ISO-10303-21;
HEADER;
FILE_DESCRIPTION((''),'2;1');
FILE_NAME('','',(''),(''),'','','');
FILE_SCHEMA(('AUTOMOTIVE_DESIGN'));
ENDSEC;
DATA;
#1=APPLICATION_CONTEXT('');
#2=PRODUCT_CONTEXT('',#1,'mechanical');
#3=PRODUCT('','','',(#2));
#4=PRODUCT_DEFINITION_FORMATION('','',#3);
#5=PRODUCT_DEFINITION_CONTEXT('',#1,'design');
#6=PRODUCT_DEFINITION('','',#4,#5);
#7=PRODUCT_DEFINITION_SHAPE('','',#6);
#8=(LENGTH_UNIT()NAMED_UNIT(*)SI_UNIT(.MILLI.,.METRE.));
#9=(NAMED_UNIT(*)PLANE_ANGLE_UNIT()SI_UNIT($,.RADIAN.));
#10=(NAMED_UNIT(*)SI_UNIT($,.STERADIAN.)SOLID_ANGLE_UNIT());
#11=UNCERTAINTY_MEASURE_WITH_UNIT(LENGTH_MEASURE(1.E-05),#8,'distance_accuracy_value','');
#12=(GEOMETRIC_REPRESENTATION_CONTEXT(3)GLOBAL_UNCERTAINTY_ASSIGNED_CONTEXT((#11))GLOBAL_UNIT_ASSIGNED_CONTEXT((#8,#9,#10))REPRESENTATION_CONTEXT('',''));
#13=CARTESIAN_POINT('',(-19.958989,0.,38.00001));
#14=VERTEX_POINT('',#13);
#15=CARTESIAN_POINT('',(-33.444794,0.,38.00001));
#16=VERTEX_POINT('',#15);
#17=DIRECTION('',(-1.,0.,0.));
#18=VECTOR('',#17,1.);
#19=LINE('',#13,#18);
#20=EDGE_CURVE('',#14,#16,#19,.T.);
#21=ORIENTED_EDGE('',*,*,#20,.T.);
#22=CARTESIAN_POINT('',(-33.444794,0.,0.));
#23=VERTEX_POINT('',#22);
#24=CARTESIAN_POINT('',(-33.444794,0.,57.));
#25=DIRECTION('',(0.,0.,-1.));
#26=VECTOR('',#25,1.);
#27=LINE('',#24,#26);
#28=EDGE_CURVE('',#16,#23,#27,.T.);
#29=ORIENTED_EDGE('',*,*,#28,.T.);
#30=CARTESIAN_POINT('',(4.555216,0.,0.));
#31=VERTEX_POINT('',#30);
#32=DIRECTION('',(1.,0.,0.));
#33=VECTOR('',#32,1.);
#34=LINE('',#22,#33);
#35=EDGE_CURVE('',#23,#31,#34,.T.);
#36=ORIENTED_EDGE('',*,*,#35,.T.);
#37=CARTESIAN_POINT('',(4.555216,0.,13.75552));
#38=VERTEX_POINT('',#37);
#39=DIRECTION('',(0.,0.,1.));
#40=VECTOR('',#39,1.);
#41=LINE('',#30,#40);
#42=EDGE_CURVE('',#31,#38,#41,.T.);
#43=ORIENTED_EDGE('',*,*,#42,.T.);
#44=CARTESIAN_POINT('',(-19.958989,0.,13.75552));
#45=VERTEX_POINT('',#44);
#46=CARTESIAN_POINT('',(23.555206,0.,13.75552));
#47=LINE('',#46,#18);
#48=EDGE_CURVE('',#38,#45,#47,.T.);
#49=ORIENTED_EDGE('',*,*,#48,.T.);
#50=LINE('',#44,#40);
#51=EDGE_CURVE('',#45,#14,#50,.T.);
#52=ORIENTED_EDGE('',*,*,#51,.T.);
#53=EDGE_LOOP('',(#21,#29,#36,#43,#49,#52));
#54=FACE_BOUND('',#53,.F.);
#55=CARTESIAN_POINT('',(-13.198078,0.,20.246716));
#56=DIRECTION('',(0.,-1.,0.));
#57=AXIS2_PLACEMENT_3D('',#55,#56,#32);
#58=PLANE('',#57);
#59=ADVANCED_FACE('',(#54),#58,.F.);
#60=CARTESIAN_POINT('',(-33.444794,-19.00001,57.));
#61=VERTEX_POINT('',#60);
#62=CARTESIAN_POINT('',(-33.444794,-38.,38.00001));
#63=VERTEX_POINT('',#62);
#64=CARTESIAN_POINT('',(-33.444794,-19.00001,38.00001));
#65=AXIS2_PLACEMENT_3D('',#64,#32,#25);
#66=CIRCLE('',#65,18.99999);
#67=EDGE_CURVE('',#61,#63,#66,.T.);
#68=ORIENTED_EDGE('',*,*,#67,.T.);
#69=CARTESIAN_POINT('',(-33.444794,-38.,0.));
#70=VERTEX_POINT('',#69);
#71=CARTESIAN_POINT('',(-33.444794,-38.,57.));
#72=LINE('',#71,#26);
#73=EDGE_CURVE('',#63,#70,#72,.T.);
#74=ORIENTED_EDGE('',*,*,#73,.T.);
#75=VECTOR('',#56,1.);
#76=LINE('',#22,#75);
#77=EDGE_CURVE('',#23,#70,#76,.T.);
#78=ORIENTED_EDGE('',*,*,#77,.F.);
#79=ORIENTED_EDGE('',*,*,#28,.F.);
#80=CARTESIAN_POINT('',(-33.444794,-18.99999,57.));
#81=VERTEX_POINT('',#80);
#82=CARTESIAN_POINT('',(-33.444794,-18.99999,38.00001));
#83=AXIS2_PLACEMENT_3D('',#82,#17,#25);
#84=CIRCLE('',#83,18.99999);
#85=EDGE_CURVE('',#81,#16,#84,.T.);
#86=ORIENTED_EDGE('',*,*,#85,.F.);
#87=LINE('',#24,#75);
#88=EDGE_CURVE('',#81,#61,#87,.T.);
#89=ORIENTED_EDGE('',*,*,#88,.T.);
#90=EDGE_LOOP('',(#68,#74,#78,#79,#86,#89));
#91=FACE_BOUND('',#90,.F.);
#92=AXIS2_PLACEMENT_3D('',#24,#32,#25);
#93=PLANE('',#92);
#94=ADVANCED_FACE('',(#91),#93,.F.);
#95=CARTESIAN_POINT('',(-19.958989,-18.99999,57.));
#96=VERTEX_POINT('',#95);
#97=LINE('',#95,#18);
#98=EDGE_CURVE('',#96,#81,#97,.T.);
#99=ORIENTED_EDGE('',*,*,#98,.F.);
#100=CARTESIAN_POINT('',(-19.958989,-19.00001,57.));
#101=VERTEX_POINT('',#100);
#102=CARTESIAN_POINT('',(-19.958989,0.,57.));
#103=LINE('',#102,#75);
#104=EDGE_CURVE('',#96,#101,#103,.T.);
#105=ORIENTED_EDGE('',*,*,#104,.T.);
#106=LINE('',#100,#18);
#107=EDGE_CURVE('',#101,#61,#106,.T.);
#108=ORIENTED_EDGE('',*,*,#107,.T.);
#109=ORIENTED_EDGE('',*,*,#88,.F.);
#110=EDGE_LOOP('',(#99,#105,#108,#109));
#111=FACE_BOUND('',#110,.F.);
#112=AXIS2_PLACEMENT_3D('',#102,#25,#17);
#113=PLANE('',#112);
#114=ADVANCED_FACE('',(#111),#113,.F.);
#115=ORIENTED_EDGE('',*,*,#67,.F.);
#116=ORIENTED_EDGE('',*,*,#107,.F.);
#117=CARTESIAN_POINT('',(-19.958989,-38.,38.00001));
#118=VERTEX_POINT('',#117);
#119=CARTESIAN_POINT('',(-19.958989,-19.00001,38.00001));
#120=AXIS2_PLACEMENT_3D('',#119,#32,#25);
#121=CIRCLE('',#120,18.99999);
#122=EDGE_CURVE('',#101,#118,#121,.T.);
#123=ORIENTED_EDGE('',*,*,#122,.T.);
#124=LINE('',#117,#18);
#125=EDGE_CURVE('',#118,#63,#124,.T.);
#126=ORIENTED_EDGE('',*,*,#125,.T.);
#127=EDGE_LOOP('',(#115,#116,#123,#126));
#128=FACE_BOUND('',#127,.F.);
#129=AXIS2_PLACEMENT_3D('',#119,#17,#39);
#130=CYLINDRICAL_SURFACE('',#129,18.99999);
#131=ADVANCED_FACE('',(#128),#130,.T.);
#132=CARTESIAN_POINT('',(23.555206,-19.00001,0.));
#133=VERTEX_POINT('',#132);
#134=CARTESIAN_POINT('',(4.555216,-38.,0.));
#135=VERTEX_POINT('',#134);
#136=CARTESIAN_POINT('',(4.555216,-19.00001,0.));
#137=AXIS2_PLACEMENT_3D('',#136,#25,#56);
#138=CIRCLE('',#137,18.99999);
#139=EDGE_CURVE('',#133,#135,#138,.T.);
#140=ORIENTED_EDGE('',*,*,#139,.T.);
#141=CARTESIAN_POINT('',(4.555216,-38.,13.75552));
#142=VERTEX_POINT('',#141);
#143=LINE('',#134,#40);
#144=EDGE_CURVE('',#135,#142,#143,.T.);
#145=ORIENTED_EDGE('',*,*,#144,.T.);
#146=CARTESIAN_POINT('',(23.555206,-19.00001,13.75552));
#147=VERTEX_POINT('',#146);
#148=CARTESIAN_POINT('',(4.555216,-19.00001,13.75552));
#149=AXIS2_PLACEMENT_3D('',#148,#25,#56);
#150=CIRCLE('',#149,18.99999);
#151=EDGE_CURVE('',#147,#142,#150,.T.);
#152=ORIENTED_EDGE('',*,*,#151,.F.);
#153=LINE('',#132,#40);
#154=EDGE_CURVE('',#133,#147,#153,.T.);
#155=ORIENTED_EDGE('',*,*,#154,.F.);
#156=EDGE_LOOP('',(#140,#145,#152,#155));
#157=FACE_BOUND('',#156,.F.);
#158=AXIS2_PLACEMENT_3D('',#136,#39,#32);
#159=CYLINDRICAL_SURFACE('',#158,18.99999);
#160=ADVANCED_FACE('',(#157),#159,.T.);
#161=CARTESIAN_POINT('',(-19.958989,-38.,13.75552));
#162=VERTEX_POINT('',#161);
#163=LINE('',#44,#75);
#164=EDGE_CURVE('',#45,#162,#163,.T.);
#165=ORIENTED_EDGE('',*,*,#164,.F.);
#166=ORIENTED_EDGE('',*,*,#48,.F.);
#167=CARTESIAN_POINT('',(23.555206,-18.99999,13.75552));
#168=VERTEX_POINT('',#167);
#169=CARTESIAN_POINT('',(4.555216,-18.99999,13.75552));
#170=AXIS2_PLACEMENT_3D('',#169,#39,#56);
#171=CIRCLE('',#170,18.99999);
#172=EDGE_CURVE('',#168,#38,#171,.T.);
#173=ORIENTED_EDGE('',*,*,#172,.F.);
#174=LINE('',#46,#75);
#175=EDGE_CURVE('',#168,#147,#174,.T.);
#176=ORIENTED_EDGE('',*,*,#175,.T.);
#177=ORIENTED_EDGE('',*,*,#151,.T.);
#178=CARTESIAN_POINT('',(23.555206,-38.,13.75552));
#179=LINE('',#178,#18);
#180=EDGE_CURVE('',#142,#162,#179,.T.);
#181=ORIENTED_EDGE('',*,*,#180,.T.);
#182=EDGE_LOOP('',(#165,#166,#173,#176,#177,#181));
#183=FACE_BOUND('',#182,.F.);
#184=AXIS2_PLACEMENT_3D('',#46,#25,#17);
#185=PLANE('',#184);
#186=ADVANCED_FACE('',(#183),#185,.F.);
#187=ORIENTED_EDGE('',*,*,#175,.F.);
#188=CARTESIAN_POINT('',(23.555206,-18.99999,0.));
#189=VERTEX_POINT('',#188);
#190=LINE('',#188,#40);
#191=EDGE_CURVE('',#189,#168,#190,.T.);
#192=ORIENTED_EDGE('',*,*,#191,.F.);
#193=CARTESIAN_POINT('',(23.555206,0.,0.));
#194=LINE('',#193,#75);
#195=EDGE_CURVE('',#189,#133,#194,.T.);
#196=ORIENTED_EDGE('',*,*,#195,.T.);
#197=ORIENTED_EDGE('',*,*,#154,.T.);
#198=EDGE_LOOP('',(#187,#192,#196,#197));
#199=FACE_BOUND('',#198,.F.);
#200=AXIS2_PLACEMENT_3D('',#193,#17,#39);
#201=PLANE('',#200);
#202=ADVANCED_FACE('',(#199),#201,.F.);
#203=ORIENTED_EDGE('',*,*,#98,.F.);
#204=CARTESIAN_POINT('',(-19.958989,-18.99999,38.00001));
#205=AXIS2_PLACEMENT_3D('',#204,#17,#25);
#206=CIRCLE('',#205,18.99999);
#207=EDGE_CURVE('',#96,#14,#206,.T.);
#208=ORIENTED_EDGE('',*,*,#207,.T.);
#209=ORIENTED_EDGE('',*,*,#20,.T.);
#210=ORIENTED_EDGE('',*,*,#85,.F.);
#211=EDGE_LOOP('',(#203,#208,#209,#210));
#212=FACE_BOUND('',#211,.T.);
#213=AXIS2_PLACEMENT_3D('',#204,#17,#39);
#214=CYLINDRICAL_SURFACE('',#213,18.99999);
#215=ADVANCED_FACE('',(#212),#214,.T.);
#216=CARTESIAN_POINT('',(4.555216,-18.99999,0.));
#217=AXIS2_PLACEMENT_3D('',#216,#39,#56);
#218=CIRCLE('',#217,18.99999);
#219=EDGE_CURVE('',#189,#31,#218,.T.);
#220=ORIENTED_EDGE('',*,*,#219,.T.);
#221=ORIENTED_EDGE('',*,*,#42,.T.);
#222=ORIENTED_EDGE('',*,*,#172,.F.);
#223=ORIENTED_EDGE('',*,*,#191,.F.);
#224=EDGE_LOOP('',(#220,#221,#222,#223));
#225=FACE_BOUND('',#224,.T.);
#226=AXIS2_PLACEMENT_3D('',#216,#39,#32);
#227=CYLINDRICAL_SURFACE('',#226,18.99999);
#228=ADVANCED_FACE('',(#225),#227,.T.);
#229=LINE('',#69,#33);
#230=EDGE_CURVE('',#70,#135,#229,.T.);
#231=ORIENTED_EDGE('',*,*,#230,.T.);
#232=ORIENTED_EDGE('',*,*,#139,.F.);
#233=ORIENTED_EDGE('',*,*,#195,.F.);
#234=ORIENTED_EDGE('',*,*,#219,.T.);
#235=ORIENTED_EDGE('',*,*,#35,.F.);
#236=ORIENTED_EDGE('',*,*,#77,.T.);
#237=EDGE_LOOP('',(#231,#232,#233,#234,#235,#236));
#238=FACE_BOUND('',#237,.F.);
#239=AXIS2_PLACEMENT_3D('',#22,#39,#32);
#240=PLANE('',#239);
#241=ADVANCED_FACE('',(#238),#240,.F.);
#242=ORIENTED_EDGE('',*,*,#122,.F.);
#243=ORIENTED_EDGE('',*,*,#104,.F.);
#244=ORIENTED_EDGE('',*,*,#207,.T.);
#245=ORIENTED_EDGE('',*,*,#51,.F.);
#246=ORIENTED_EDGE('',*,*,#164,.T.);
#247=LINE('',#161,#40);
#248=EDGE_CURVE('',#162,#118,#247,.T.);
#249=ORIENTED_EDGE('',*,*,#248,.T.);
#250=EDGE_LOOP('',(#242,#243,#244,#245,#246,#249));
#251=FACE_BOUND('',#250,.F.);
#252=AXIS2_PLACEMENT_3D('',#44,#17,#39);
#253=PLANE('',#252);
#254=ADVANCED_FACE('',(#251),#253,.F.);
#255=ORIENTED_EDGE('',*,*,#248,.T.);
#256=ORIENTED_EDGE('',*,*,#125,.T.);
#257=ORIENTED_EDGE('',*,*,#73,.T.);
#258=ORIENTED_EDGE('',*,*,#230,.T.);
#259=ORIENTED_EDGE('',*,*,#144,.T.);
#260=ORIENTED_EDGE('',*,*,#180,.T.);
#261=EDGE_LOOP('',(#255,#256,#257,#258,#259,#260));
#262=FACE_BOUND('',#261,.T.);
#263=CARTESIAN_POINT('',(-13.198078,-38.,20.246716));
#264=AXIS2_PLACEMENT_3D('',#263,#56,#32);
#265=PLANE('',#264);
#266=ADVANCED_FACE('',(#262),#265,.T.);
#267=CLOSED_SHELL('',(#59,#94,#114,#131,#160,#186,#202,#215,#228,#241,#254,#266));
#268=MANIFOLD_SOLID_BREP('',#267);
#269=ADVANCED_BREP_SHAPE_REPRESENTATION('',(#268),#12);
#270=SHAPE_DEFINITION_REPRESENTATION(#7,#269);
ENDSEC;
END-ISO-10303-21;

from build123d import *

# Parameters (mm, degrees)
F1_DEPTH = 38
F2_R     = 18.99999


# Not quite as in the source:
# - a fillet or chamfer is up to 0.001 mm smaller than in the source, because OpenCascade refuses the exact size


with BuildPart() as f1:
    # F0 (on Front) → F1 (new body)
    with BuildSketch(Plane.XZ):
        Polygon((-19.9589891719, 57), (-33.4447937101, 57), (-33.4447937101, 13.7555195992), (-33.4447937101, 0), (-19.9589891719, 0), (23.5552062899, 0), (23.5552062899, 13.7555195992), (-19.9589891719, 13.7555195992), align=None)
    extrude(amount=F1_DEPTH)

    # F2 (radius 19 in the source; OpenCascade refuses exactly that, so slightly less here)
    f2_edges = [f1.edges().sort_by_distance(p)[0] for p in [
        (-26.701891, -38, 57),
        (-26.701891, 0, 57),
        (23.555206, 0, 6.87776),
        (23.555206, -38, 6.87776),
    ]]
    fillet(f2_edges, radius=F2_R)


solid = f1.part
